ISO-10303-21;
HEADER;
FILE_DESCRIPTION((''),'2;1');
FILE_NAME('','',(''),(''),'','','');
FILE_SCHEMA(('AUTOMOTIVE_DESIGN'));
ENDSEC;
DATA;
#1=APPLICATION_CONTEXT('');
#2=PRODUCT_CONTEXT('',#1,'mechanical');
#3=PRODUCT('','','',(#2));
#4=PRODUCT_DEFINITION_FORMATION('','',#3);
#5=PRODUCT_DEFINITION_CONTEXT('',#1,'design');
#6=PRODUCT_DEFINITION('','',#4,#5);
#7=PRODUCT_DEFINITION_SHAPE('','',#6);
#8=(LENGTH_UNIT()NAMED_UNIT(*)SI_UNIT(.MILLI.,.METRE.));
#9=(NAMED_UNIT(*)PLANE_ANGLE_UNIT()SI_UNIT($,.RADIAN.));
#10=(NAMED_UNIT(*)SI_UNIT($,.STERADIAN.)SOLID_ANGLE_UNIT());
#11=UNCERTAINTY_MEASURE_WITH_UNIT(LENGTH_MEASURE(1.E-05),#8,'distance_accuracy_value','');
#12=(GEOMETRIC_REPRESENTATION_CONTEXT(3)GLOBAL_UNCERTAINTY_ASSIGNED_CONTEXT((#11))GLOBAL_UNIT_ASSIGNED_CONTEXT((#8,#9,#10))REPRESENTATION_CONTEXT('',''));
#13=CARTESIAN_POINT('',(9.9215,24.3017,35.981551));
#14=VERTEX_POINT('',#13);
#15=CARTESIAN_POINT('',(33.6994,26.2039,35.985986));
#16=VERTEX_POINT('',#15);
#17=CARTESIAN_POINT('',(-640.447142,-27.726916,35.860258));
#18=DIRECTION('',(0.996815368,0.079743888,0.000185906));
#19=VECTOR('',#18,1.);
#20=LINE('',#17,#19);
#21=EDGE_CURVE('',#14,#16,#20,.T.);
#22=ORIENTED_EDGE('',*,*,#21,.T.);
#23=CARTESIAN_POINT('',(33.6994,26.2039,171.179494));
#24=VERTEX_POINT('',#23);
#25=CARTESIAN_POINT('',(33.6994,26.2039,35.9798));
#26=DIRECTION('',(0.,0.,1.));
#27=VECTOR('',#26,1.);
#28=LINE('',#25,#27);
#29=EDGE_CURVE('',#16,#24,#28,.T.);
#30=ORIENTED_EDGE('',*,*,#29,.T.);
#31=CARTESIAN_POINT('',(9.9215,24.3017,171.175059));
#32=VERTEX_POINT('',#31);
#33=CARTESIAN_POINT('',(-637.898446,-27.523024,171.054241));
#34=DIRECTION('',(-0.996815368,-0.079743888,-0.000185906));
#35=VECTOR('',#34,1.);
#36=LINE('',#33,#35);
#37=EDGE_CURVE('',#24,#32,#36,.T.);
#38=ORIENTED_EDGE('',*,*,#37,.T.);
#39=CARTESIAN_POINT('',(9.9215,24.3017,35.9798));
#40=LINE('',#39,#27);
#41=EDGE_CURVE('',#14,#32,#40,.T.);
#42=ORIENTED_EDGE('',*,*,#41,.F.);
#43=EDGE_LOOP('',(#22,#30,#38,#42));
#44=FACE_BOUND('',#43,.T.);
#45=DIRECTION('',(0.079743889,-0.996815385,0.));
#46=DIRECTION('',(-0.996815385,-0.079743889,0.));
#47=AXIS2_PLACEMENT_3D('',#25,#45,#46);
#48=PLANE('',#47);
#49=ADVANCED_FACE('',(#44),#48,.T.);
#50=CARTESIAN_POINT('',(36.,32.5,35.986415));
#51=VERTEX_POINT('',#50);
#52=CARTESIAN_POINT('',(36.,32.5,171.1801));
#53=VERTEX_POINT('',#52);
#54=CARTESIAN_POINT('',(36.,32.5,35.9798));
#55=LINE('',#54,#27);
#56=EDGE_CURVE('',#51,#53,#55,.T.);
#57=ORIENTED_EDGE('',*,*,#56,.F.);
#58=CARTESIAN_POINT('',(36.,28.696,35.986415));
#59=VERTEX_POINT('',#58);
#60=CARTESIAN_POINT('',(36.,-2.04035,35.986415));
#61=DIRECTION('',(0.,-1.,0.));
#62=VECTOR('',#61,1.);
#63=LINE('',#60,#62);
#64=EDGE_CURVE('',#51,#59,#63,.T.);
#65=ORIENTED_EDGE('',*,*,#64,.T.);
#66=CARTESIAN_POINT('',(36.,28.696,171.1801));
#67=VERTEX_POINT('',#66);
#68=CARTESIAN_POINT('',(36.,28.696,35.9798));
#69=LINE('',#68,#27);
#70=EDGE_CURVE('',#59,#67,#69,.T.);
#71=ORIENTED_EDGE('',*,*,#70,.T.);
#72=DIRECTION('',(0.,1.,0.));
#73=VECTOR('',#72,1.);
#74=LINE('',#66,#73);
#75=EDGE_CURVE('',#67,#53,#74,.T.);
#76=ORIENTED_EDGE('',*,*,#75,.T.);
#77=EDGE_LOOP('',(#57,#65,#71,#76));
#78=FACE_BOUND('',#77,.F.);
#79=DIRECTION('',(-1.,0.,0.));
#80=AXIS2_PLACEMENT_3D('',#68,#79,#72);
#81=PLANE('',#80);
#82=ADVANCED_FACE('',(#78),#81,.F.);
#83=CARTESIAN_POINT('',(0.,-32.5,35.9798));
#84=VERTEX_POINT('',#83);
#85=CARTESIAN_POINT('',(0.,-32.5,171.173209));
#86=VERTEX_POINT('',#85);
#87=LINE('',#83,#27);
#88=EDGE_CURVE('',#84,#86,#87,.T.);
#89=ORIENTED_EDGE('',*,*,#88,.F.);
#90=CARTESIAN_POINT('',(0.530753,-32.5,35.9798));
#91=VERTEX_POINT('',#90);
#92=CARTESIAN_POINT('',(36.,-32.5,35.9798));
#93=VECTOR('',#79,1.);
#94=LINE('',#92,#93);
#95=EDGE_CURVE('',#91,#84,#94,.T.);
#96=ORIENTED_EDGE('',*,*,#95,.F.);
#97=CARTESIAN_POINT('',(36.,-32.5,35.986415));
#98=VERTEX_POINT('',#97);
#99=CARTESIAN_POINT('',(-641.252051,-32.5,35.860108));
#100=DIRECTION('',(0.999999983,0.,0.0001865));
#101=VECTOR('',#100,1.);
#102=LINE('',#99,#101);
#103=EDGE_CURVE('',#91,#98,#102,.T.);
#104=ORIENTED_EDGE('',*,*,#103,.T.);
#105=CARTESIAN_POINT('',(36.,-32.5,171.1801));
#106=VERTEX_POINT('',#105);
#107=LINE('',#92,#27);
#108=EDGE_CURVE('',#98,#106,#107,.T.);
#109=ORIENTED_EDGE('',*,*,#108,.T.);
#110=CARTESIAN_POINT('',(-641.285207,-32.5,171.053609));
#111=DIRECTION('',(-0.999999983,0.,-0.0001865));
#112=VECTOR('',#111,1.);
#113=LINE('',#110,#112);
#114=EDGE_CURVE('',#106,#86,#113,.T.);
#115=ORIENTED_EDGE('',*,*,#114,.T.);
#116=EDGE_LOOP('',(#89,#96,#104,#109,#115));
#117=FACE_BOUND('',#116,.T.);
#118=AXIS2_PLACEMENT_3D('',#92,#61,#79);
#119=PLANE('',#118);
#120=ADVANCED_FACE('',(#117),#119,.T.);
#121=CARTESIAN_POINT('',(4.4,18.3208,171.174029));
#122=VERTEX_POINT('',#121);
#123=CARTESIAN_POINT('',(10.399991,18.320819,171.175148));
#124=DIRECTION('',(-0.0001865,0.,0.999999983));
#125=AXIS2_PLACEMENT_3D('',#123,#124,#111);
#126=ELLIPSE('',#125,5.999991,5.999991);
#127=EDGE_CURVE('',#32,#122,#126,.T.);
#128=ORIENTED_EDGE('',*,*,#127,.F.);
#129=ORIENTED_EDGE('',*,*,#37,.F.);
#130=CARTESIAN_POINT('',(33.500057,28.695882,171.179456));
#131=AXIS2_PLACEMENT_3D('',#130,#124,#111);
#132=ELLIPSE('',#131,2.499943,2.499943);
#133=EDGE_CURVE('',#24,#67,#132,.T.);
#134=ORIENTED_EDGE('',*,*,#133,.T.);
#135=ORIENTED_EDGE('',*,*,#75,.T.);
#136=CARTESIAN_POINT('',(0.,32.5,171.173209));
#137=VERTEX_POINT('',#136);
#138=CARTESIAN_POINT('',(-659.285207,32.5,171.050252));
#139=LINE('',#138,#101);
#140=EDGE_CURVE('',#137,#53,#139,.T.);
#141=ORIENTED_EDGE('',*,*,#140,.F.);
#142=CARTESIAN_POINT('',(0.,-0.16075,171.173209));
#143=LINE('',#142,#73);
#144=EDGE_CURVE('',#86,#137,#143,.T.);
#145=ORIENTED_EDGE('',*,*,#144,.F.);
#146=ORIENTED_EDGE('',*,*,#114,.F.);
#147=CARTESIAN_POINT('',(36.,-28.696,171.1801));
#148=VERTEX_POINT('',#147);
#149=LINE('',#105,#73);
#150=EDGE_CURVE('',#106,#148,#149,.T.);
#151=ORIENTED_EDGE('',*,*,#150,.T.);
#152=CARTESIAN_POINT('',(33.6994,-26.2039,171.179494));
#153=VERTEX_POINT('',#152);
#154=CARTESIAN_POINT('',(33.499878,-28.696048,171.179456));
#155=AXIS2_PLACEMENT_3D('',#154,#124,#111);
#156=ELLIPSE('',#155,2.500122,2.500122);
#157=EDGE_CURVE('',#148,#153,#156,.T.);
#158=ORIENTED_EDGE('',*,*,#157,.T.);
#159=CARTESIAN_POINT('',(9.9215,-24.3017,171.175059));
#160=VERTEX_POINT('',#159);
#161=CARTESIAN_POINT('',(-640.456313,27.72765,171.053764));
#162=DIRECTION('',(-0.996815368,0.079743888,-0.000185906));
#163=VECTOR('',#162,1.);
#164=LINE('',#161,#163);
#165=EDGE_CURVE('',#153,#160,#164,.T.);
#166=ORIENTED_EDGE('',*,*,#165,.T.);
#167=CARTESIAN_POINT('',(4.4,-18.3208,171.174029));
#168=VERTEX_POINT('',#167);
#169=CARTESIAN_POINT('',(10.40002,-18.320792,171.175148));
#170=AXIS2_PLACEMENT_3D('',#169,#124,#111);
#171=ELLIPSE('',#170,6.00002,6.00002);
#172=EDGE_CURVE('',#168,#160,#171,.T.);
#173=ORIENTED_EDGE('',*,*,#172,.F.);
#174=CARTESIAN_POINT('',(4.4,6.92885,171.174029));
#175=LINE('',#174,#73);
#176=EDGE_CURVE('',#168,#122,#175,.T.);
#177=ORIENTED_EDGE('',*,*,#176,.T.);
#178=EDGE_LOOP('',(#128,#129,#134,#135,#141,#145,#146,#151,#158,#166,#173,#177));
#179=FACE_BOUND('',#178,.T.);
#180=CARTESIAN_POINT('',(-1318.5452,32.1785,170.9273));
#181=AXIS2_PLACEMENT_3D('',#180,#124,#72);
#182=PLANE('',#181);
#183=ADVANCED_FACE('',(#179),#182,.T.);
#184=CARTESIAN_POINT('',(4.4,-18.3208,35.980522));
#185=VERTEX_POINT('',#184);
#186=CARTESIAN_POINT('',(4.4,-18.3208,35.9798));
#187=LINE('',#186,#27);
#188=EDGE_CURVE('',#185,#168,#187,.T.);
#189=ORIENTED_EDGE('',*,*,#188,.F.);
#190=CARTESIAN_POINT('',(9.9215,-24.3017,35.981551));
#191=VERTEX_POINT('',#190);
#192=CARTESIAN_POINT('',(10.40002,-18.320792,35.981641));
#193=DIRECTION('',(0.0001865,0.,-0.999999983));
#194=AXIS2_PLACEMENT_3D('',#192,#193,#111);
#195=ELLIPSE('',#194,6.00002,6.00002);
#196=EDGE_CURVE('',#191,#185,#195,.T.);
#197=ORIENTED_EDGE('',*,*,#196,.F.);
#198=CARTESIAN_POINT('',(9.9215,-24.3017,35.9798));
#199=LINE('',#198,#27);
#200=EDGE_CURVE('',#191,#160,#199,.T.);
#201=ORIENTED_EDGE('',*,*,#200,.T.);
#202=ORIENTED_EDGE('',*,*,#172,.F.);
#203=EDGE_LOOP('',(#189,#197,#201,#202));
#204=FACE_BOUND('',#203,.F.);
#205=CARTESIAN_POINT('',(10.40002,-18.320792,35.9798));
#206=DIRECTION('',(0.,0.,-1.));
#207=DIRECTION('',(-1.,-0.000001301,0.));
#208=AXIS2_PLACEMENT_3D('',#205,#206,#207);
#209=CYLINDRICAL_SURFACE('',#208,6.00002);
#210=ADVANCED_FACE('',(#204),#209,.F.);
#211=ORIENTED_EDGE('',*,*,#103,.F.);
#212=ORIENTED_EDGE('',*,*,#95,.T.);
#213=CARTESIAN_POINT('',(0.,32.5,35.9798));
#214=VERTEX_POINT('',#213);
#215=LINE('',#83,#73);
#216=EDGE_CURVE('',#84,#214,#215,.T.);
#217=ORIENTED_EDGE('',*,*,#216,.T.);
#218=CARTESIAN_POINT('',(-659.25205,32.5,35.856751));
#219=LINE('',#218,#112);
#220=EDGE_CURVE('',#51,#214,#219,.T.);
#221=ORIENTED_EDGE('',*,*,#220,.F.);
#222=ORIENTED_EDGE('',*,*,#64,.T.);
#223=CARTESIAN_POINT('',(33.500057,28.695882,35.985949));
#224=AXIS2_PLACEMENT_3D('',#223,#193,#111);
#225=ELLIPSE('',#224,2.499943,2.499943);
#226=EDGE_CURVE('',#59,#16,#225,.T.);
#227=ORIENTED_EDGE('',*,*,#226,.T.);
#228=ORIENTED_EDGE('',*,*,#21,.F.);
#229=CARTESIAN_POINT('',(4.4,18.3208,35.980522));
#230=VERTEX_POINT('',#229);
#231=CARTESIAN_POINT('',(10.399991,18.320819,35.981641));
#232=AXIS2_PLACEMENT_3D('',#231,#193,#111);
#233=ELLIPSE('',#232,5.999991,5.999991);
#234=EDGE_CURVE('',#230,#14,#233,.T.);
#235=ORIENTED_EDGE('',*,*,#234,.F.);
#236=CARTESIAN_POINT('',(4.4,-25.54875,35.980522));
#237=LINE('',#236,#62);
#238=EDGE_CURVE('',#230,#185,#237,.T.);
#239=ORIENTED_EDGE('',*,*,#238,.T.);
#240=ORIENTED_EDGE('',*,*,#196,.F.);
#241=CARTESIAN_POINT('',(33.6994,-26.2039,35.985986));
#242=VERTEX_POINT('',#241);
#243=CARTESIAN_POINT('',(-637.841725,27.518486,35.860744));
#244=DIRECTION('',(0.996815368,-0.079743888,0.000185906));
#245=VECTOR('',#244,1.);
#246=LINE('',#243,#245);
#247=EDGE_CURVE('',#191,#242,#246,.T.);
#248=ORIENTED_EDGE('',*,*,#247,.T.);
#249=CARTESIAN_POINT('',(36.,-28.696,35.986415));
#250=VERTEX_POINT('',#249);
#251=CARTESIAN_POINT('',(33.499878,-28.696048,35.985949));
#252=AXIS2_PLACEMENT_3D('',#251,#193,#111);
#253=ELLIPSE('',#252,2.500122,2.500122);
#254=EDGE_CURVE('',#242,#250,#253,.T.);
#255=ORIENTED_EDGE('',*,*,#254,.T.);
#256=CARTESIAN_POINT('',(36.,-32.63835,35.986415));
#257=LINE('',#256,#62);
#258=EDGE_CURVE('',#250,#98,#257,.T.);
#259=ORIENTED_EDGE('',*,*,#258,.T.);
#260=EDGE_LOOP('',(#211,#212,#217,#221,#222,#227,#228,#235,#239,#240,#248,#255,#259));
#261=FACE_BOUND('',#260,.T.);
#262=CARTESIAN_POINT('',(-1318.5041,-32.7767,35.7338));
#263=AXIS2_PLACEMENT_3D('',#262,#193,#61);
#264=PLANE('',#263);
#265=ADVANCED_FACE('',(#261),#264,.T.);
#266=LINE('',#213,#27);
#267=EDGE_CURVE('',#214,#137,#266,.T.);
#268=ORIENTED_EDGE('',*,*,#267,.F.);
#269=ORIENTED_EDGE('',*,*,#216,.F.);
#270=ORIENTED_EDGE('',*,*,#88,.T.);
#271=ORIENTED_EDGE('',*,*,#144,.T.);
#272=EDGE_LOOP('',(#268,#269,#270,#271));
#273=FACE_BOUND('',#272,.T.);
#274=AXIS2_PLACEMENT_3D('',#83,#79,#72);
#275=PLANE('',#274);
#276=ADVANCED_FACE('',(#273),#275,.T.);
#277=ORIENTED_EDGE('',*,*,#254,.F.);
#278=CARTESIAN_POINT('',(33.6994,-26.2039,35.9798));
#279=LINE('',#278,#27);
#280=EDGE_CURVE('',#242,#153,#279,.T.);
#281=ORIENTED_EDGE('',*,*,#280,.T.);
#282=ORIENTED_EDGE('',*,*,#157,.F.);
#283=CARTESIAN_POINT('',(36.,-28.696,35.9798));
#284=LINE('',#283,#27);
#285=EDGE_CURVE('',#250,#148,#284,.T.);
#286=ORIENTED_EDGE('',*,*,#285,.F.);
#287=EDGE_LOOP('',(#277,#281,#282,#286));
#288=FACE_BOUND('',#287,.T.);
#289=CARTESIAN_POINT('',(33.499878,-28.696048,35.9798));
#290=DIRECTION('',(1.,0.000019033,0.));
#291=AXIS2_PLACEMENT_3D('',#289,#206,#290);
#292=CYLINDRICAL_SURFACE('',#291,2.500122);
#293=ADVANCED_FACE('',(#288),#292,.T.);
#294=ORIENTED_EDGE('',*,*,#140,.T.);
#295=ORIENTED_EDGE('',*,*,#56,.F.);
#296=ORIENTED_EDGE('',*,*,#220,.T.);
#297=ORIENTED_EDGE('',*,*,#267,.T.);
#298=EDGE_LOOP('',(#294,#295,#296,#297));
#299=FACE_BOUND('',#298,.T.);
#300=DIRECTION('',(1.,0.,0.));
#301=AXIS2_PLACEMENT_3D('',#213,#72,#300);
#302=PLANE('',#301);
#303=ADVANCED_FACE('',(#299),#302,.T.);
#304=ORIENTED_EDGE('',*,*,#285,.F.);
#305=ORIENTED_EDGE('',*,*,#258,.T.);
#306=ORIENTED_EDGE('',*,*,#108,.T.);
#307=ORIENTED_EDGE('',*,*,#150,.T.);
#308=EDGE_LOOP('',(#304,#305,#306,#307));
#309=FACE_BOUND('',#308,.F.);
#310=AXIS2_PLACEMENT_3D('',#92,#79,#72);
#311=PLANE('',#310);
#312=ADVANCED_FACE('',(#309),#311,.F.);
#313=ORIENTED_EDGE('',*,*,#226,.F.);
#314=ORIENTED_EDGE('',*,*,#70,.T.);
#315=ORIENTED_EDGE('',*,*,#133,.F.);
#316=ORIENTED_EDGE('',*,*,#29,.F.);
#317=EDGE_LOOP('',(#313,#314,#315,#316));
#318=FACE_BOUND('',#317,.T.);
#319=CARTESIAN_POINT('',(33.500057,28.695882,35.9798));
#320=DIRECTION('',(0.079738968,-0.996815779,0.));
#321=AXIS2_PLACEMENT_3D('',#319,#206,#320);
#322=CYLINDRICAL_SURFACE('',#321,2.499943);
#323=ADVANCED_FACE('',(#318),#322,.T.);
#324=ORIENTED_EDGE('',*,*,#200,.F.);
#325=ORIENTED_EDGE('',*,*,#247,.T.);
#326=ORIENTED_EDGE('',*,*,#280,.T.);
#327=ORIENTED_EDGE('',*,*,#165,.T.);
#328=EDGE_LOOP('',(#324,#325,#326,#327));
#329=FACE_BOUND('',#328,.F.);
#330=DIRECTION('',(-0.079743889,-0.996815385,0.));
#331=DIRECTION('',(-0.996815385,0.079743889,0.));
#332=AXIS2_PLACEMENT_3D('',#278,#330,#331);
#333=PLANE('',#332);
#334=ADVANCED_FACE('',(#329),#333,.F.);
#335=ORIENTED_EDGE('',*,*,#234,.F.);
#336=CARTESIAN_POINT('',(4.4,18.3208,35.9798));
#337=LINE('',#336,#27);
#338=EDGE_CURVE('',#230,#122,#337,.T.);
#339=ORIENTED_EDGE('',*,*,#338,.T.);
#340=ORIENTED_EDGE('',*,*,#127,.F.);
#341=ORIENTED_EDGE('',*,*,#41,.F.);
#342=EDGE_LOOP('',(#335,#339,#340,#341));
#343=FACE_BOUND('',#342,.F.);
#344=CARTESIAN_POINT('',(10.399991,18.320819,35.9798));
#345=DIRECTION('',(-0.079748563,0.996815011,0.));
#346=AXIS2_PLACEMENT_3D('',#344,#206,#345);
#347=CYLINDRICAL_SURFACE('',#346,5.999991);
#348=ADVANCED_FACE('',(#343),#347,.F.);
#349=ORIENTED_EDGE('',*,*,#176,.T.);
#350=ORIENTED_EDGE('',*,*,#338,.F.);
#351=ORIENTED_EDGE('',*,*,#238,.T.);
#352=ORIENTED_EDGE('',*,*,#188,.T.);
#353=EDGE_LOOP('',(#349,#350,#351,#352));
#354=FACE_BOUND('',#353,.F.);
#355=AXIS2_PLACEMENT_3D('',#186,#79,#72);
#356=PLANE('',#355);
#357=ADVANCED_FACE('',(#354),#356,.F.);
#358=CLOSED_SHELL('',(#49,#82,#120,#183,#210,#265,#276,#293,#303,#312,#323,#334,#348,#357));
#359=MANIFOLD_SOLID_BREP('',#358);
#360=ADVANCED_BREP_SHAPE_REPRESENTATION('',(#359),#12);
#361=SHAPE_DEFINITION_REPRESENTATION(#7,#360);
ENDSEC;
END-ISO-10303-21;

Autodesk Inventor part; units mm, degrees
ref_plane "Начальная плоскость" through (0, 0, 35.9798) normal (0, 0, 1) x (1, 0, 0)
ref_plane "Конечная плоскость" through (0, 0, 171.1801) normal (0, 0, 1) x (1, 0, 0)
sketch "Эскиз" plane through (0, 0, 0) normal (0, 0, 1) x (1, 0, 0)
  line L0 (36, -32.5) -> (0, -32.5)
  line L1 (36, -32.5) -> (36, -28.696)
  line L2 (33.6994, -26.2039) -> (9.9215, -24.3017)
  line L3 (4.4, -18.3208) -> (4.4, 18.3208)
  line L4 (33.6994, 26.2039) -> (9.9215, 24.3017)
  line L5 (36, 28.696) -> (36, 32.5)
  line L6 (0, 32.5) -> (36, 32.5)
  line L7 (0, -32.5) -> (0, 32.5)
  arc A0 (4.4, -18.3208) -> (9.9215, -24.3017) centre (10.4, -18.3208) ccw
  arc A1 (9.9215, 24.3017) -> (4.4, 18.3208) centre (10.4, 18.3208) ccw
  arc A2 (36, -28.696) -> (33.6994, -26.2039) centre (33.5, -28.696) ccw
  arc A3 (33.6994, 26.2039) -> (36, 28.696) centre (33.5, 28.696) ccw
  line L8 (0, 45.5) -> (0, -45.5) construction
  line L9 (-7.2974, 0) -> (43.7847, 0) construction
  point P0 (36, -26.388)
  point P1 (4.4, -23.86)
  point P2 (4.4, 23.86)
  point P3 (36, 26.388)
  dimension "d3" = 36
  dimension "d5" = 4.4
  dimension "d7" = 65
  dimension "d9" = 8.64
  dimension "d11" = 8.64
  dimension "d13" = 6.112
  dimension "d15" = 6.112
  dimension "d22" = 6
  dimension "d23" = 2.5
  dimension "d24" = 32.5
  dimension "d25" = 0
extrude "Тело" add sketch "Эскиз" along normal up to surface (135.2003 mm away) from surface at 35.9798
sketch "Sketch3" plane through (0, 0, 0) normal (0, 0, 1) x (1, 0, 0)
  line L0 (0, 0) -> (10, 0)
ref_plane "Work Plane7" through (0, 0, 0) normal (0, -1, 0) x (1, 0, 0)
sketch "Sketch4" plane through (0, 0, 0) normal (0, -1, 0) x (1, 0, 0)
  line L0 (-2, 35.9798) -> (12, 35.9798)
  line L1 (-2, 171.1801) -> (12, 171.1801)
  dimension "d29" = 135.2003
ref_plane "РабПлоскость8" through (-1318.5041, -32.7767, 35.7338) normal (0.0001865, 0, -1) x (-1, 0, -0.0001865)
split "Разделение1" plane through (-1318.5041, -32.7767, 35.7338) removes the side toward (0.0001865, 0, -1)
ref_plane "РабПлоскость9" through (-1318.5452, 32.1785, 170.9273) normal (-0.0001865, 0, 1) x (1, 0, 0.0001865)
split "Разделение2" plane through (-1318.5452, 32.1785, 170.9273) removes the side toward (-0.0001865, 0, 1)
equation "\"d3\" = b"
equation "\"d5\" = t1"
equation "\"d7\" = ParH"
equation "\"d9\" = msp_x1 + t2"
equation "\"d11\" = msp_x1 + t2"
equation "\"d13\" = -msp_x2 + t2"
equation "\"d15\" = -msp_x2 + t2"
equation "\"d22\" = R"
equation "\"d23\" = R1"
equation "\"d24\" = 0.5 * d7"
equation "\"d16\" = G_L"
equation "\"R1\" = 2.5"
equation "\"R\" = 6"
equation "\"t1\" = 4.4"
equation "\"t2\" = 7.2"
equation "\"ParH\" = 65"
equation "\"b\" = 36"
equation "\"msp_x1\" = 0.04 * b"
equation "\"msp_x2\" = -0.08 * t1 + 0.04 * b"
equation "\"G_L\" = d29"
equation "\"ex\" = 0"
equation "\"G_OFFSET_START\" = -35.9798"
equation "\"G_OFFSET_END\" = -35.98923"
equation "\"d26\" = -G_OFFSET_START"
equation "\"d27\" = G_OFFSET_END + B_L"
equation "\"B_L\" = 207.16929"
properties part number "Швеллер 6.5U-135,2 ГОСТ 8240-97" material "Сталь, мягкая"
